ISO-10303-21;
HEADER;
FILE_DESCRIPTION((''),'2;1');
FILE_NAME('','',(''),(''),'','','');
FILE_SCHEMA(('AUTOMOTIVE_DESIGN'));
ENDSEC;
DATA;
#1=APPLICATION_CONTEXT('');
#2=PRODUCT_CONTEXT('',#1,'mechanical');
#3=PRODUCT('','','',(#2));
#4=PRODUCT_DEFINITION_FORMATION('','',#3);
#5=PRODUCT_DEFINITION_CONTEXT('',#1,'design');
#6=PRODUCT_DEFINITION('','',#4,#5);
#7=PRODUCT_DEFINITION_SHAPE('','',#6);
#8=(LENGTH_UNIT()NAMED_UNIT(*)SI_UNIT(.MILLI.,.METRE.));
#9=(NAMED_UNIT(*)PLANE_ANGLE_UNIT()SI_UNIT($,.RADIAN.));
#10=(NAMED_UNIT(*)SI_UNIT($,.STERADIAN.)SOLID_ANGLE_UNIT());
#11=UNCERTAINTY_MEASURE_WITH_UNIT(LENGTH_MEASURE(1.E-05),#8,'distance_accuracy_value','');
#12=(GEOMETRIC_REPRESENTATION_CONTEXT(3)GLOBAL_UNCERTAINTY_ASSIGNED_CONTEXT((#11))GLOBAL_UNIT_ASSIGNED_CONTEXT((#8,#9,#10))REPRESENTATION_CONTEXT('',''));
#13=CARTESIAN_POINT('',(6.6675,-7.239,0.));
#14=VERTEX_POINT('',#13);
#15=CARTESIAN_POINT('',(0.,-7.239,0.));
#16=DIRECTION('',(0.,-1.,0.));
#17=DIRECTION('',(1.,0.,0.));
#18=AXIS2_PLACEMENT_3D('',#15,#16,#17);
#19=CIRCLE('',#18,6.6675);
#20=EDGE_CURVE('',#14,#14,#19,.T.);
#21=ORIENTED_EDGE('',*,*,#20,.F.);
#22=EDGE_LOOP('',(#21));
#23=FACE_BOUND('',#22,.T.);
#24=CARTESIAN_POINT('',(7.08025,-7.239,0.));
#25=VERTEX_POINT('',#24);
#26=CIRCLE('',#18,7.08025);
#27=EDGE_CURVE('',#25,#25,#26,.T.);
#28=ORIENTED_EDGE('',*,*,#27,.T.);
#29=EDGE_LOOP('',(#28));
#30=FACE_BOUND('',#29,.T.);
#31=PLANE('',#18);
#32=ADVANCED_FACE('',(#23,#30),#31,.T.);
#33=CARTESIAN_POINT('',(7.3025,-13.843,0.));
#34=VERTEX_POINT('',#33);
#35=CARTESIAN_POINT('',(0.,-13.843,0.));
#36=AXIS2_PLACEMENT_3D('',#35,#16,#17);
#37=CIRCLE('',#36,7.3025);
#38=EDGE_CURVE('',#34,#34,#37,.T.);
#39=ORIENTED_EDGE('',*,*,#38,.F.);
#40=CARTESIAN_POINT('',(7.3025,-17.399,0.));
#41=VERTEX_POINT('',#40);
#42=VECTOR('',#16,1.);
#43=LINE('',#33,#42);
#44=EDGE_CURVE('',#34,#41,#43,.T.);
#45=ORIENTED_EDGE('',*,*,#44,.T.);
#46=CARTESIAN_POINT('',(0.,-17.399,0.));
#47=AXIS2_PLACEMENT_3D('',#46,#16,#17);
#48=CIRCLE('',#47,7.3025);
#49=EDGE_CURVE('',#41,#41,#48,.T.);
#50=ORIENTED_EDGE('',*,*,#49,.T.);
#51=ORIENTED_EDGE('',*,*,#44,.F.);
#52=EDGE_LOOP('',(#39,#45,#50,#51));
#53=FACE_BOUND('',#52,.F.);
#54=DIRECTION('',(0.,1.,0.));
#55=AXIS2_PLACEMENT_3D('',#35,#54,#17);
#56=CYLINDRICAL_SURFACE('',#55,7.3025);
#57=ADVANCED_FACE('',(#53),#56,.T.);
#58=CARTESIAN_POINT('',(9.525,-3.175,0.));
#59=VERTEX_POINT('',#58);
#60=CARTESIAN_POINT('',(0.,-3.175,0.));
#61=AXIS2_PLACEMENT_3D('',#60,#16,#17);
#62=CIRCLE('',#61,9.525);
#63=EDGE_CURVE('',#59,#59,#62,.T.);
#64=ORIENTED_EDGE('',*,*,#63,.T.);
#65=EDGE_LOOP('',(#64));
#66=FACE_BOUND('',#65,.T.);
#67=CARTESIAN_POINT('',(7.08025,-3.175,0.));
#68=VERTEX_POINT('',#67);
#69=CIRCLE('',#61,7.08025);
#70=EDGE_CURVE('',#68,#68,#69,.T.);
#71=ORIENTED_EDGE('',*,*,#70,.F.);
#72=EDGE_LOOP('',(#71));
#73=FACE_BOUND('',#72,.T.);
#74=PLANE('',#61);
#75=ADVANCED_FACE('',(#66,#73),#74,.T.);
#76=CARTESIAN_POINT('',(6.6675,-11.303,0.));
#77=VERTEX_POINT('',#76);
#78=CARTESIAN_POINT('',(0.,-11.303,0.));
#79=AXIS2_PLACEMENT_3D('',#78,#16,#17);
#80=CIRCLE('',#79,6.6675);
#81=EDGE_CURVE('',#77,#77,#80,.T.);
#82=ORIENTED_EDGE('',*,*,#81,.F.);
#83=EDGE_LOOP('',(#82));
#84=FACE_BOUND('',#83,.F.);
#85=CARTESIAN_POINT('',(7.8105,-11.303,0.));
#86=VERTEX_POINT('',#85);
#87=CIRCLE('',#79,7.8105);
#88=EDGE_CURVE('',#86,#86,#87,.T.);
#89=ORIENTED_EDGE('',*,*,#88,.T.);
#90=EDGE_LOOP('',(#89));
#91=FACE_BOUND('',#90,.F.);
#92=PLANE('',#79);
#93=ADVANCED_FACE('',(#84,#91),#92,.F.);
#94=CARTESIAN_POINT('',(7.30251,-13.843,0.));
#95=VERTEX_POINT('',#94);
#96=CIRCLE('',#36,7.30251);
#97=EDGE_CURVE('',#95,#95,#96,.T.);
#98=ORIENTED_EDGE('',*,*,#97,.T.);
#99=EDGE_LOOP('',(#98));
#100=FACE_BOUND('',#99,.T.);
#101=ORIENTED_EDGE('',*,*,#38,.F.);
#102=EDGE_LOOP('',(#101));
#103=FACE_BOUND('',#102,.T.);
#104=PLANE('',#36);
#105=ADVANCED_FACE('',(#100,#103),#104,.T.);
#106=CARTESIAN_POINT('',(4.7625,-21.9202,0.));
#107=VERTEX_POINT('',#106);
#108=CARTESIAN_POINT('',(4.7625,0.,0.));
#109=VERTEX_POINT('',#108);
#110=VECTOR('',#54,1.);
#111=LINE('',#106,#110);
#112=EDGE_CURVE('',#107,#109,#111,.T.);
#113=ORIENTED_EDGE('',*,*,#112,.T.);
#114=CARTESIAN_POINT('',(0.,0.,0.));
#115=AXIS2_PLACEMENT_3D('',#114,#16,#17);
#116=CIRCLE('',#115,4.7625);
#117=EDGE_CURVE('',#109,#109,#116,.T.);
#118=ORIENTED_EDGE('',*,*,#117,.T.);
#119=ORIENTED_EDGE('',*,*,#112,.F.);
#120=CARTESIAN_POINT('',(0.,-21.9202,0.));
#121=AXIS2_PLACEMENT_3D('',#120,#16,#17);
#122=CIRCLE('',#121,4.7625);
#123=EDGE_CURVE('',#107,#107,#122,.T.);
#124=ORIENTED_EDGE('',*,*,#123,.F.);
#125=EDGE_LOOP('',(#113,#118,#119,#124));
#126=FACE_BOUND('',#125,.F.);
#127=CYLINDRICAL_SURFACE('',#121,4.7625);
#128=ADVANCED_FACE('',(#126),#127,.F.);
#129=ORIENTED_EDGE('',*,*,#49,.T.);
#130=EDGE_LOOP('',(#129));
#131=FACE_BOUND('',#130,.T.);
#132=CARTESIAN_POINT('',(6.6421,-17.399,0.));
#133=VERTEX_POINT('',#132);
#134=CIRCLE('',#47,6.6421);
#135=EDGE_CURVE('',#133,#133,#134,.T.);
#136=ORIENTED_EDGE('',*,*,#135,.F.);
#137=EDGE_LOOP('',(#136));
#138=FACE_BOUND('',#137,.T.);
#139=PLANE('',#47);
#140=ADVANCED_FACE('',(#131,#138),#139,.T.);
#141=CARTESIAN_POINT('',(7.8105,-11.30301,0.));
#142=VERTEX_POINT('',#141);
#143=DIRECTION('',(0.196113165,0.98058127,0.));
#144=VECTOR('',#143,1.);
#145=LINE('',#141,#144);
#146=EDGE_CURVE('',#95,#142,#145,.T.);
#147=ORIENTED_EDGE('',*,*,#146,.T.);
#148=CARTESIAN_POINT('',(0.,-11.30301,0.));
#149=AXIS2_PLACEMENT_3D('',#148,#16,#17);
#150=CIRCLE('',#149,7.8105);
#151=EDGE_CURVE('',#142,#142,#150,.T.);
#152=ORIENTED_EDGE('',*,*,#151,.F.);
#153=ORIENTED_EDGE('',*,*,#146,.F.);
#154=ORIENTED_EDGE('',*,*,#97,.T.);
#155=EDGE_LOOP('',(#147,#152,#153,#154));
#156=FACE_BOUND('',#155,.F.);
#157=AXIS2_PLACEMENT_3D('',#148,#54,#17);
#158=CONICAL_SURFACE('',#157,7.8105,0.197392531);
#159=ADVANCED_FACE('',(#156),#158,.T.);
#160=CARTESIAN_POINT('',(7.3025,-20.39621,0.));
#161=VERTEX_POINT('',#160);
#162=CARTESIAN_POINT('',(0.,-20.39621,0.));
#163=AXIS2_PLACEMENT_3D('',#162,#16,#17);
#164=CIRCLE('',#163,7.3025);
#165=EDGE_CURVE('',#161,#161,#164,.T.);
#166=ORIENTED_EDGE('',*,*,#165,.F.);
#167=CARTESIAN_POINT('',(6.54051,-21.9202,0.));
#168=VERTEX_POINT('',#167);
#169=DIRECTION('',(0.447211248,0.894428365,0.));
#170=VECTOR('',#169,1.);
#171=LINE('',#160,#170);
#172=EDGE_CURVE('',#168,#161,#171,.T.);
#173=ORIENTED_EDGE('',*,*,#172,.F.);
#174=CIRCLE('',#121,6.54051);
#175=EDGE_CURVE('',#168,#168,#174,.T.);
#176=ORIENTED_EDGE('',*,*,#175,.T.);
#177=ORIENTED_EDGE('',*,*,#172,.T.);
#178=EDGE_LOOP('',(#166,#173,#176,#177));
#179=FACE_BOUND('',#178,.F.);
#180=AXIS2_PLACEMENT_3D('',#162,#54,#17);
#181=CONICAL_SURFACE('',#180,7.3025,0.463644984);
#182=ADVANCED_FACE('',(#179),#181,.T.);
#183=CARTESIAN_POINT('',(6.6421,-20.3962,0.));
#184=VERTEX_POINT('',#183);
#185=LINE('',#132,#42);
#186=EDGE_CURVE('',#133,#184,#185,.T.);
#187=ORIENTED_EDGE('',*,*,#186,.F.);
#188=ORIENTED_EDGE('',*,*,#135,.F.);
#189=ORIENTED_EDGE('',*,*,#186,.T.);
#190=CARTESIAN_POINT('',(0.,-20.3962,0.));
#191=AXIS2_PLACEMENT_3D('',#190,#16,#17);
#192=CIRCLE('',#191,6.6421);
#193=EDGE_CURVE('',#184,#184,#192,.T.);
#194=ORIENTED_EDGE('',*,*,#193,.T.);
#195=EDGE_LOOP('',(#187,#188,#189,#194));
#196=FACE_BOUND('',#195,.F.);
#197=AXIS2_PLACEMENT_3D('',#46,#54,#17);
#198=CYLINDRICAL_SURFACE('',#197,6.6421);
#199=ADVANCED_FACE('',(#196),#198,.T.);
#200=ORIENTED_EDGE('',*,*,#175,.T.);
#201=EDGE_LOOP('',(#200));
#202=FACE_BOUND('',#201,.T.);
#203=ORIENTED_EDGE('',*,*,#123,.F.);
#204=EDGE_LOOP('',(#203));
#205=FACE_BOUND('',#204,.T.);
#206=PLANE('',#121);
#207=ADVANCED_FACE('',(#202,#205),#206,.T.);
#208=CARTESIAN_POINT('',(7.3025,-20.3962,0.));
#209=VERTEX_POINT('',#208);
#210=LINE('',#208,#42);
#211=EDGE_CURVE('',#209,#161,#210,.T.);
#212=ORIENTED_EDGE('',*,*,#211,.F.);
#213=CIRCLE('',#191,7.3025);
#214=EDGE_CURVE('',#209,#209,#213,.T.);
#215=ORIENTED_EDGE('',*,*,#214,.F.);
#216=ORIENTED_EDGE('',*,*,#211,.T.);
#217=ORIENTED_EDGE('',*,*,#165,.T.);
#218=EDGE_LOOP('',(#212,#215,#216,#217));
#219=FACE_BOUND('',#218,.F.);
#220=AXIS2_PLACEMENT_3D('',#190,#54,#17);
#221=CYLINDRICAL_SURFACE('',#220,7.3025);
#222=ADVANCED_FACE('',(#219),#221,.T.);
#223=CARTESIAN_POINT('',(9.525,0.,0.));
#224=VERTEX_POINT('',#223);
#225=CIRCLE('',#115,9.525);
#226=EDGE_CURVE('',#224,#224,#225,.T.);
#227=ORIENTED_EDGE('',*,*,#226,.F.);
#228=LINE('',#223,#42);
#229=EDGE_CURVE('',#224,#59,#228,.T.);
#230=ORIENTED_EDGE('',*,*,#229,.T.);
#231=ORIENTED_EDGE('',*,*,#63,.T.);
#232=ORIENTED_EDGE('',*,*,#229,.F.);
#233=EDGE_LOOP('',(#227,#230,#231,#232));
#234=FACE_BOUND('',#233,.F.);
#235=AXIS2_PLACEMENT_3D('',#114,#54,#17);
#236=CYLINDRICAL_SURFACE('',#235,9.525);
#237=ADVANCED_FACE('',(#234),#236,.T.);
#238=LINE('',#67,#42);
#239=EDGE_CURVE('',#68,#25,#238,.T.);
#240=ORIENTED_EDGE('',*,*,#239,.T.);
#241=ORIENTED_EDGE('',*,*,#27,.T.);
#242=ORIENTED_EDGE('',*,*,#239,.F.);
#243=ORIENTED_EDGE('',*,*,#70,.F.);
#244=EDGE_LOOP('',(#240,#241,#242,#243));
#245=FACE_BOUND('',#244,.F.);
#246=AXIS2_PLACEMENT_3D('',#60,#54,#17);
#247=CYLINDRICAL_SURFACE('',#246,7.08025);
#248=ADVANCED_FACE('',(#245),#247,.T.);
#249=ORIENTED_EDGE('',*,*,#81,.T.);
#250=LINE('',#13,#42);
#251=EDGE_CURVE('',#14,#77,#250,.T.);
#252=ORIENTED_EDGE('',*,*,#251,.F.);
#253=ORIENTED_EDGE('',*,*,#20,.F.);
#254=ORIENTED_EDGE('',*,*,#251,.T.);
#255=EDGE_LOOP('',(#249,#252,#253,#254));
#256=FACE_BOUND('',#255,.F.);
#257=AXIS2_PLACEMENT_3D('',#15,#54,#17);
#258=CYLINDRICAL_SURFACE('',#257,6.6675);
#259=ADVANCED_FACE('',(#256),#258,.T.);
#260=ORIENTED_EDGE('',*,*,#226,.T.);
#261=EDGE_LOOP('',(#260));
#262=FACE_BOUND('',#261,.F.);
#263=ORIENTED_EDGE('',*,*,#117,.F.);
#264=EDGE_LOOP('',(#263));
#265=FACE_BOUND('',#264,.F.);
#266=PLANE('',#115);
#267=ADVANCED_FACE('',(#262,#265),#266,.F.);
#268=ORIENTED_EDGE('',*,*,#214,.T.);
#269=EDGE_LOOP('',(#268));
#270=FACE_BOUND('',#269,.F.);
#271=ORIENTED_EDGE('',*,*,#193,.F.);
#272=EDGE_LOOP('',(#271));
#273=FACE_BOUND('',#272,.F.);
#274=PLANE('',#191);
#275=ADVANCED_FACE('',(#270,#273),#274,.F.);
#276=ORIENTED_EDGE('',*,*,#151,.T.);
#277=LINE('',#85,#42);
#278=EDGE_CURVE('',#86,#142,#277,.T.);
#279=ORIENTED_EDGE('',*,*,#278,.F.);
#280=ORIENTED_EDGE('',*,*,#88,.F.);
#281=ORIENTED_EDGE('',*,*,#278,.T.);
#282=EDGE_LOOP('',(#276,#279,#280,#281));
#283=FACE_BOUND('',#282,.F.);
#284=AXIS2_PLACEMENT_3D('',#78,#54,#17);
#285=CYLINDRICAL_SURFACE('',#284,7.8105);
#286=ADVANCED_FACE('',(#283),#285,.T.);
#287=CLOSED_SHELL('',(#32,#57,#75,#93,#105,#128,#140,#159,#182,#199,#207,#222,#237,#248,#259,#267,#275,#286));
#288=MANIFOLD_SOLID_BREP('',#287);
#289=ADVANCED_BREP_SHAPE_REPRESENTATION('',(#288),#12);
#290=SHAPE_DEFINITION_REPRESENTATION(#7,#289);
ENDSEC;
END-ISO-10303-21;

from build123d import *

# Parameters (mm, degrees)
F0_R      = 9.525
F1_DEPTH  = 3.175
F2_R      = 7.08025
F3_DEPTH  = 4.064
F4_R      = 6.6675
F5_DEPTH  = 4.064
F6_R      = 7.8105
F7_DEPTH  = 2.54
F8_R      = 7.3025
F9_DEPTH  = 3.556
F10_R     = 6.6421
F11_DEPTH = 2.9972
F12_R     = 7.3025
F13_DEPTH = 1.524
F14_SIZE2 = 2.53999
F14_SIZE  = 0.50799
F15_SIZE2 = 1.52399
F15_SIZE  = 0.76199
F16_R     = 4.7625
F17_DEPTH = 21.9212


# Not quite as in the source:
# - a fillet or chamfer is up to 0.001 mm smaller than in the source, because OpenCascade refuses the exact size


with BuildPart() as f1:
    # F0 (on Front) → F1 (new body)
    with BuildSketch(Plane.XZ):
        Circle(F0_R)
    extrude(amount=F1_DEPTH)

    # F2 (on face) → F3 (join)
    with BuildSketch(Plane.XZ.offset(3.175)):
        Circle(F2_R)
    extrude(amount=F3_DEPTH)

    # F4 (on face) → F5 (join)
    with BuildSketch(Plane.XZ.offset(7.239)):
        Circle(F4_R)
    extrude(amount=F5_DEPTH)

    # F6 (on face) → F7 (join)
    with BuildSketch(Plane.XZ.offset(11.303)):
        Circle(F6_R)
    extrude(amount=F7_DEPTH)

    # F8 (on face) → F9 (join)
    with BuildSketch(Plane.XZ.offset(13.843)):
        Circle(F8_R)
    extrude(amount=F9_DEPTH)

    # F10 (on face) → F11 (join)
    with BuildSketch(Plane.XZ.offset(17.399)):
        Circle(F10_R)
    extrude(amount=F11_DEPTH)

    # F12 (on face) → F13 (join)
    with BuildSketch(Plane.XZ.offset(20.3962)):
        Circle(F12_R)
    extrude(amount=F13_DEPTH)

    # F14 (size 0.508 and 2.54 in the source; OpenCascade refuses exactly that, so slightly less here)
    f14_edges = [f1.edges().sort_by_distance(p)[0] for p in [
        (-7.8105, -13.843, 0),
    ]]
    f14_side = f1.faces().sort_by_distance((-7.589586, -13.843, 0))[0]
    chamfer(f14_edges, length=F14_SIZE, length2=F14_SIZE2, reference=f14_side)

    # F15 (size 0.762 and 1.524 in the source; OpenCascade refuses exactly that, so slightly less here)
    f15_edges = [f1.edges().sort_by_distance(p)[0] for p in [
        (-7.3025, -21.9202, 0),
    ]]
    f15_side = f1.faces().sort_by_distance((0, -21.9202, 0))[0]
    chamfer(f15_edges, length=F15_SIZE, length2=F15_SIZE2, reference=f15_side)

    # F16 (on face) → F17 (cut, through all)
    with BuildSketch(Plane.XZ.offset(21.9202)):
        Circle(F16_R)
    extrude(amount=-F17_DEPTH, mode=Mode.SUBTRACT)


solid = f1.part
